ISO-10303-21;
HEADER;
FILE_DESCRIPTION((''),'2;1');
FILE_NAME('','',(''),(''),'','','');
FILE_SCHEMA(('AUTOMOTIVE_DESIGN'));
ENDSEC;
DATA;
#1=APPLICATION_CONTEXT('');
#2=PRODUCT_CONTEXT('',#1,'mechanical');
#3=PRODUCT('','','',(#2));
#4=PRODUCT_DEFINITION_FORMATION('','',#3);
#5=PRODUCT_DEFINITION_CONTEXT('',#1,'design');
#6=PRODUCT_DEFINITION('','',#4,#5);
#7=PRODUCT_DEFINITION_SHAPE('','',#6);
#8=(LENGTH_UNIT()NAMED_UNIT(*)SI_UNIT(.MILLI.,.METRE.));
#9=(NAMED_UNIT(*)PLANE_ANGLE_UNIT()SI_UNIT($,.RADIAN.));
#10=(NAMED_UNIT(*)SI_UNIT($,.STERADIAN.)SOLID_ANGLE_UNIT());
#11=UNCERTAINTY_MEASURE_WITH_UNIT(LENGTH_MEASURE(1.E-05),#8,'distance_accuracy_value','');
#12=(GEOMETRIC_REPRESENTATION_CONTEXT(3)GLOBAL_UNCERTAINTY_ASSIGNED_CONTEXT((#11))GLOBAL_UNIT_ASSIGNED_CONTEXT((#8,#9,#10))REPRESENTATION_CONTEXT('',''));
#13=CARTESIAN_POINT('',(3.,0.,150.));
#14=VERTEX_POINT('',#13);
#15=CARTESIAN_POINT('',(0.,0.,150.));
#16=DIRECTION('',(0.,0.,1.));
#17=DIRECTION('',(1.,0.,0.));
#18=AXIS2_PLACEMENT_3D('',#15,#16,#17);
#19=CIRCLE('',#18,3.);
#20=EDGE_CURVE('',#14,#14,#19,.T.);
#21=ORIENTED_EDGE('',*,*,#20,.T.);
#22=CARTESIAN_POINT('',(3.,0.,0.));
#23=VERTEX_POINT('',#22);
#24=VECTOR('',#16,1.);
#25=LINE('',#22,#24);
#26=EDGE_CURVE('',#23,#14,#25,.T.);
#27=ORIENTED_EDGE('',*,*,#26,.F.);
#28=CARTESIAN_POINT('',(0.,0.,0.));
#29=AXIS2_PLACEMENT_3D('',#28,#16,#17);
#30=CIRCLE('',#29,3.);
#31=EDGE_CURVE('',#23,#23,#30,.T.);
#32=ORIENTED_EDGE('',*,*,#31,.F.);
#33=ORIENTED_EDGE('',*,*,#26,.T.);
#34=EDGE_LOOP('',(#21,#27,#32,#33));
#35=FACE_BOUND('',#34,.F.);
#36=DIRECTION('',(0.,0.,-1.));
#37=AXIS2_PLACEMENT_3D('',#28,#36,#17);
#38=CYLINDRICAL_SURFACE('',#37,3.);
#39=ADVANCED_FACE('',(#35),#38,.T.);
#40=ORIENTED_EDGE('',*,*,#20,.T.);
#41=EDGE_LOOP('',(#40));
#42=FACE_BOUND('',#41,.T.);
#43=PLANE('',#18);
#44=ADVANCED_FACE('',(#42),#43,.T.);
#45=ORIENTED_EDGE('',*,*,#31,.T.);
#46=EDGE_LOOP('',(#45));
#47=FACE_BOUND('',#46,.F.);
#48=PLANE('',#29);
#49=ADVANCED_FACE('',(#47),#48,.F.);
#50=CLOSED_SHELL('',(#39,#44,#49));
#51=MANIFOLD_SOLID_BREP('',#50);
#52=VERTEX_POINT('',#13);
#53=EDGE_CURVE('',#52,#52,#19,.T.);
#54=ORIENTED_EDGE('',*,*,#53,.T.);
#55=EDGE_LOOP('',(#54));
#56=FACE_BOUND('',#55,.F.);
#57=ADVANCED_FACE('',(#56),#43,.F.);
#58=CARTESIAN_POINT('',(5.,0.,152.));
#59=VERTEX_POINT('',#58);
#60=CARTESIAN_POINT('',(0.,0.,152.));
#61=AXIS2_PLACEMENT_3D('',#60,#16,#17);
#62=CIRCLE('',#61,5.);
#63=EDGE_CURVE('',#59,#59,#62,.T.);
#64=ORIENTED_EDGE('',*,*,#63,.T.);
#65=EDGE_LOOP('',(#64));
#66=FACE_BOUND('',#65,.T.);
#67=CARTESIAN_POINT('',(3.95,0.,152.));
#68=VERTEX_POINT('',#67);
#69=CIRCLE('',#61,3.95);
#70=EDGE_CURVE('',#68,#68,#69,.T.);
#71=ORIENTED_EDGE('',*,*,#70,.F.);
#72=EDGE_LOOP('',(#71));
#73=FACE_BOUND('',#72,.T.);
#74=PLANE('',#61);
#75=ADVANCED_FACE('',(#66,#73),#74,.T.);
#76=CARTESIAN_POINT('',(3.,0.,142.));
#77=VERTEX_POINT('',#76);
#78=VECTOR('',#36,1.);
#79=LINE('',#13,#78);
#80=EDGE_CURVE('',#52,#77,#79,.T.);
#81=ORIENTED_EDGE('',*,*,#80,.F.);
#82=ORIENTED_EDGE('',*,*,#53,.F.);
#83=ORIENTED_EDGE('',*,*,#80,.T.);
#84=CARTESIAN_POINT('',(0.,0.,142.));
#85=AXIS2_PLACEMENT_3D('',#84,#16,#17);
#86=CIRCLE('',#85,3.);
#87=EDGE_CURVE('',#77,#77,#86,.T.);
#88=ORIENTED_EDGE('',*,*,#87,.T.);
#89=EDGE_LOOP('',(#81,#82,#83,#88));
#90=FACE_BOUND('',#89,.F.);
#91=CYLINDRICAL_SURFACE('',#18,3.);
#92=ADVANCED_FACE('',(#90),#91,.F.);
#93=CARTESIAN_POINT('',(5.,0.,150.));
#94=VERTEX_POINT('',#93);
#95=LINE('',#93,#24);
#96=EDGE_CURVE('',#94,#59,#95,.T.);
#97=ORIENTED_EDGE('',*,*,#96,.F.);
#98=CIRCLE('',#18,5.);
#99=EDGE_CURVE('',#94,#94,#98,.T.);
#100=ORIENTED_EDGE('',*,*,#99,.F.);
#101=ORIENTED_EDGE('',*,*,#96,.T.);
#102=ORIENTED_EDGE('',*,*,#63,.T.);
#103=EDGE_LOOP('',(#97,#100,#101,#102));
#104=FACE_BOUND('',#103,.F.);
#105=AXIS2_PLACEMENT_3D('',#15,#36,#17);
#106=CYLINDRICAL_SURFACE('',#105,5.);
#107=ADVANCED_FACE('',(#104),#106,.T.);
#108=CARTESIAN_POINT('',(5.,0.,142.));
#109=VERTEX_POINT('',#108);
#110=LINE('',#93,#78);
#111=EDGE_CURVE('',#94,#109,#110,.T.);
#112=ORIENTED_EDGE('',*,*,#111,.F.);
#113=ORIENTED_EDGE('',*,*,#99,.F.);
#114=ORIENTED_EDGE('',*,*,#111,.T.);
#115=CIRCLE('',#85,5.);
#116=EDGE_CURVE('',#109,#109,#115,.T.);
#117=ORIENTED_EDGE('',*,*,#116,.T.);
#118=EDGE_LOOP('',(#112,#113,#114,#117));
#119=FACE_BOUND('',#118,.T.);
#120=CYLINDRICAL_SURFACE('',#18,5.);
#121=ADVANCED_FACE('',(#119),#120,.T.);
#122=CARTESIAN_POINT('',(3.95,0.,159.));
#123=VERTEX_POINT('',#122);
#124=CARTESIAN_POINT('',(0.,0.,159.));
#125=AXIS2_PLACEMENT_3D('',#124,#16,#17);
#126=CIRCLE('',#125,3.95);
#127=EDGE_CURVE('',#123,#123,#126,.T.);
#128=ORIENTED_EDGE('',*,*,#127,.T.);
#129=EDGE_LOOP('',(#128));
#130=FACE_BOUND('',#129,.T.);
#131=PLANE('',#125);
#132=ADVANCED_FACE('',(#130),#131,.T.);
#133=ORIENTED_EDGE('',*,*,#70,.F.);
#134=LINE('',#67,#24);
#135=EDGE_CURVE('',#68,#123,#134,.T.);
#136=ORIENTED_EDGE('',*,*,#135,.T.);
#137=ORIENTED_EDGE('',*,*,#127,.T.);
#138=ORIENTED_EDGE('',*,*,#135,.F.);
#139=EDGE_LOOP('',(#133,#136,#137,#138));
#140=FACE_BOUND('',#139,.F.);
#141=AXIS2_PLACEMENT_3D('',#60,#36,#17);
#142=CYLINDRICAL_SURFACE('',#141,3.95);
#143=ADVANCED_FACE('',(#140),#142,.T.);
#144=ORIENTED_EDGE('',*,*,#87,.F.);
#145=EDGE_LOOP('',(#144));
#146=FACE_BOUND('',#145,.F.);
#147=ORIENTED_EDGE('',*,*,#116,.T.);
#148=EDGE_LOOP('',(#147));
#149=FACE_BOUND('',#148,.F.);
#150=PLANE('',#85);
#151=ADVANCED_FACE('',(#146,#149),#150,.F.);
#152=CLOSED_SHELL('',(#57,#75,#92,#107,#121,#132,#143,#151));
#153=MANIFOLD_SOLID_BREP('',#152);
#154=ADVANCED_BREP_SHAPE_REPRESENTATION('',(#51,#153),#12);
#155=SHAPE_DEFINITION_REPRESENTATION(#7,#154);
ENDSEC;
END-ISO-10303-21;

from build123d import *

# Parameters (mm, degrees)
F0_R     = 3
F1_DEPTH = 150
F2_R     = 5
F2_R_2   = 3
F3_DEPTH = 8
F4_DEPTH = 2
F5_R     = 3.95
F6_DEPTH = 7


with BuildPart() as f1:
    # F0 (on Top) → F1 (new body)
    with BuildSketch(Plane.XY):
        Circle(F0_R)
    extrude(amount=F1_DEPTH)


with BuildPart() as f3:
    # F2 (on face) → F3 (new body)
    with BuildSketch(Plane.XY.offset(150)):
        Circle(F2_R)
        Circle(F2_R_2, mode=Mode.SUBTRACT)
    extrude(amount=-F3_DEPTH)

    # F2 (on face) → F4 (join)
    with BuildSketch(Plane.XY.offset(150)):
        Circle(F2_R)
        Circle(F2_R_2, mode=Mode.SUBTRACT)
        Circle(F2_R_2)
    extrude(amount=F4_DEPTH)

    # F5 (on face) → F6 (join)
    with BuildSketch(Plane.XY.offset(152)):
        Circle(F5_R)
    extrude(amount=F6_DEPTH)


solid = Compound([f1.part, f3.part])
